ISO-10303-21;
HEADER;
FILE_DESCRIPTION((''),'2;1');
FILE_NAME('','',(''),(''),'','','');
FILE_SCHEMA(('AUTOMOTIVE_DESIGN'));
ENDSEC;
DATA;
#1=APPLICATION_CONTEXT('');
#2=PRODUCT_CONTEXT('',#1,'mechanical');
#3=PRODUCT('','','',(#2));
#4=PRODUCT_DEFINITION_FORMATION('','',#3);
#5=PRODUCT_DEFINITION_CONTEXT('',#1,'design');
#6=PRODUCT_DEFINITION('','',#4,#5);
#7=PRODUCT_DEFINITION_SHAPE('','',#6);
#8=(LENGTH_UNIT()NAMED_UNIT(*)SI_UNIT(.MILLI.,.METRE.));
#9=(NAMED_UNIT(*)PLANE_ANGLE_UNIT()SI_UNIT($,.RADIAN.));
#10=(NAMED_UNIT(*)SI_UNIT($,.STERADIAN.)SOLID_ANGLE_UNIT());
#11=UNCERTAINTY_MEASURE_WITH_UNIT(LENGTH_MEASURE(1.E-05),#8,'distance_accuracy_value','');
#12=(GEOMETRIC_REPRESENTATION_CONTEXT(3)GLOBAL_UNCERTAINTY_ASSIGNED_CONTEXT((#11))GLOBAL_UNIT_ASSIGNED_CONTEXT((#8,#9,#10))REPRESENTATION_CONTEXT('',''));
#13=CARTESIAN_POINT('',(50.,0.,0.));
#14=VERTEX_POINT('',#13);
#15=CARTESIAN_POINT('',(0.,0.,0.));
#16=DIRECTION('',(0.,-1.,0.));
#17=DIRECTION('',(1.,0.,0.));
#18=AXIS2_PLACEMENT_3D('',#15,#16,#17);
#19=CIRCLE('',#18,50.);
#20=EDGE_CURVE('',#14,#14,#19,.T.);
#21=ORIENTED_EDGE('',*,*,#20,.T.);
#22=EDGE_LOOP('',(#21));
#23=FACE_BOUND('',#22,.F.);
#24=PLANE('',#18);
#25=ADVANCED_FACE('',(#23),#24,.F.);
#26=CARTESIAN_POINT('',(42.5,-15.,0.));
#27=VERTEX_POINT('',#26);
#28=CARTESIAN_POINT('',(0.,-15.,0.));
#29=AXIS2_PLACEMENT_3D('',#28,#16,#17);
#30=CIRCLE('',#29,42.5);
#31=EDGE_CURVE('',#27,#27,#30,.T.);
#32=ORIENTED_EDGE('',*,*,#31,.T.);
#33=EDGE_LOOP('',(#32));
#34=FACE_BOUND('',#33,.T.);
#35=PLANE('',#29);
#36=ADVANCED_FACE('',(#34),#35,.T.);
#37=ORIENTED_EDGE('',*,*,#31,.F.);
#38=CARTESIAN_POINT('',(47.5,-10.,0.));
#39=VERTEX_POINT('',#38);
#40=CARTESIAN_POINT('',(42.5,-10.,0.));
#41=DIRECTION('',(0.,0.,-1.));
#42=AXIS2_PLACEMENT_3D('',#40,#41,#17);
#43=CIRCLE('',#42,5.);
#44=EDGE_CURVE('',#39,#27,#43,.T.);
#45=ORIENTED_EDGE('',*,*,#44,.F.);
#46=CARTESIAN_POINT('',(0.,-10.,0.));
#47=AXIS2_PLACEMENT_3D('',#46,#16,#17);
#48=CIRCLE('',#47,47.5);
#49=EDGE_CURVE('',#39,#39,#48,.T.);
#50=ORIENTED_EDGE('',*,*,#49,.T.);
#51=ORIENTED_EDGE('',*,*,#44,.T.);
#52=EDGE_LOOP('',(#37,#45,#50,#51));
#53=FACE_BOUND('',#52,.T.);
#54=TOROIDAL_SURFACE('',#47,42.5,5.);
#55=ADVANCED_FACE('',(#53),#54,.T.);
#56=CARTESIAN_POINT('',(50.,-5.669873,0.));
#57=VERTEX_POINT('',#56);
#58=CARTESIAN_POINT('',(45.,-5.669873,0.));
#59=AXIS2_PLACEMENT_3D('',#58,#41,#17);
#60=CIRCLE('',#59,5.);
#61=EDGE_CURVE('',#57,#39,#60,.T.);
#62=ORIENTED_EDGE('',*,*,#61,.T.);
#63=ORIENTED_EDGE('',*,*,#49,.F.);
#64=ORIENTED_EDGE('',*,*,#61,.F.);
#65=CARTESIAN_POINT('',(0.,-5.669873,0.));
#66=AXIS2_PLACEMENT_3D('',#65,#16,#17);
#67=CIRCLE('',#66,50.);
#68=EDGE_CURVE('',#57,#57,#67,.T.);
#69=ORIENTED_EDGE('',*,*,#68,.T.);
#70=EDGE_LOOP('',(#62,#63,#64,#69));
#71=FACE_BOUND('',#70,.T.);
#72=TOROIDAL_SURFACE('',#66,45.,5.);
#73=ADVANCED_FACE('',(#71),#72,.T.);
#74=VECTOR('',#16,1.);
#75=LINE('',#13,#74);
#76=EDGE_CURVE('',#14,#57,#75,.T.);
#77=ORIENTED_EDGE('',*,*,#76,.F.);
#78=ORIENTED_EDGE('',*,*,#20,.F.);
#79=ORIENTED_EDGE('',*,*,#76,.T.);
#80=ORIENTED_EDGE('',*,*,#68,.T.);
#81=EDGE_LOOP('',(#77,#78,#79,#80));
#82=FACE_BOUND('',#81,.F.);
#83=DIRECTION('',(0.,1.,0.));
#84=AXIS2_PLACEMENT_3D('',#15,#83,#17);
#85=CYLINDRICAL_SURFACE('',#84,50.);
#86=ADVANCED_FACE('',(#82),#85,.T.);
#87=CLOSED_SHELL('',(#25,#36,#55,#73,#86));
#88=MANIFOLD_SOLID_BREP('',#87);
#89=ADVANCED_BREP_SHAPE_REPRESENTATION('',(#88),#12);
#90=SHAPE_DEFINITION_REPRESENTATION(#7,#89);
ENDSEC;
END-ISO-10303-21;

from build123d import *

# Parameters (mm, degrees)
F0_R     = 50
F1_DEPTH = 10
F2_R     = 47.5
F3_DEPTH = 5


# Not quite as in the source:
# - a fillet or chamfer that OpenCascade refuses, or shapes differently, is made with other operations: its cross-section is extruded or revolved along the edge and cut away or added


with BuildPart() as f1:
    # F0 (on Front) → F1 (new body)
    with BuildSketch(Plane.XZ):
        Circle(F0_R)
    extrude(amount=F1_DEPTH)

    # F2 (on face) → F3 (join)
    with BuildSketch(Plane.XZ.offset(10)):
        Circle(F2_R)
    extrude(amount=F3_DEPTH)

    # F4: fillet of radius 5 on 2 edges, made by hand

    # F4_s1 → F4_t2 (revolve, cut)
    with BuildSketch(Plane.XY):
        with BuildLine():
            ThreePointArc((50, -5.6698729811), (49.3301270189, -8.1698729811), (47.5, -10))
            Line((47.5, -10), (50, -10))
            Line((50, -10), (50, -5.6698729811))
        make_face()
    revolve(axis=Axis((0, -10, 0), (0, -1, 0)), mode=Mode.SUBTRACT)

    # F4_s3 → F4_t4 (revolve, cut)
    with BuildSketch(Plane.XY):
        with BuildLine():
            ThreePointArc((47.5, -10), (46.0355339059, -13.5355339059), (42.5, -15))
            Line((42.5, -15), (47.5, -15))
            Line((47.5, -15), (47.5, -10))
        make_face()
    revolve(axis=Axis((0, -15, 0), (0, -1, 0)), mode=Mode.SUBTRACT)


solid = f1.part
